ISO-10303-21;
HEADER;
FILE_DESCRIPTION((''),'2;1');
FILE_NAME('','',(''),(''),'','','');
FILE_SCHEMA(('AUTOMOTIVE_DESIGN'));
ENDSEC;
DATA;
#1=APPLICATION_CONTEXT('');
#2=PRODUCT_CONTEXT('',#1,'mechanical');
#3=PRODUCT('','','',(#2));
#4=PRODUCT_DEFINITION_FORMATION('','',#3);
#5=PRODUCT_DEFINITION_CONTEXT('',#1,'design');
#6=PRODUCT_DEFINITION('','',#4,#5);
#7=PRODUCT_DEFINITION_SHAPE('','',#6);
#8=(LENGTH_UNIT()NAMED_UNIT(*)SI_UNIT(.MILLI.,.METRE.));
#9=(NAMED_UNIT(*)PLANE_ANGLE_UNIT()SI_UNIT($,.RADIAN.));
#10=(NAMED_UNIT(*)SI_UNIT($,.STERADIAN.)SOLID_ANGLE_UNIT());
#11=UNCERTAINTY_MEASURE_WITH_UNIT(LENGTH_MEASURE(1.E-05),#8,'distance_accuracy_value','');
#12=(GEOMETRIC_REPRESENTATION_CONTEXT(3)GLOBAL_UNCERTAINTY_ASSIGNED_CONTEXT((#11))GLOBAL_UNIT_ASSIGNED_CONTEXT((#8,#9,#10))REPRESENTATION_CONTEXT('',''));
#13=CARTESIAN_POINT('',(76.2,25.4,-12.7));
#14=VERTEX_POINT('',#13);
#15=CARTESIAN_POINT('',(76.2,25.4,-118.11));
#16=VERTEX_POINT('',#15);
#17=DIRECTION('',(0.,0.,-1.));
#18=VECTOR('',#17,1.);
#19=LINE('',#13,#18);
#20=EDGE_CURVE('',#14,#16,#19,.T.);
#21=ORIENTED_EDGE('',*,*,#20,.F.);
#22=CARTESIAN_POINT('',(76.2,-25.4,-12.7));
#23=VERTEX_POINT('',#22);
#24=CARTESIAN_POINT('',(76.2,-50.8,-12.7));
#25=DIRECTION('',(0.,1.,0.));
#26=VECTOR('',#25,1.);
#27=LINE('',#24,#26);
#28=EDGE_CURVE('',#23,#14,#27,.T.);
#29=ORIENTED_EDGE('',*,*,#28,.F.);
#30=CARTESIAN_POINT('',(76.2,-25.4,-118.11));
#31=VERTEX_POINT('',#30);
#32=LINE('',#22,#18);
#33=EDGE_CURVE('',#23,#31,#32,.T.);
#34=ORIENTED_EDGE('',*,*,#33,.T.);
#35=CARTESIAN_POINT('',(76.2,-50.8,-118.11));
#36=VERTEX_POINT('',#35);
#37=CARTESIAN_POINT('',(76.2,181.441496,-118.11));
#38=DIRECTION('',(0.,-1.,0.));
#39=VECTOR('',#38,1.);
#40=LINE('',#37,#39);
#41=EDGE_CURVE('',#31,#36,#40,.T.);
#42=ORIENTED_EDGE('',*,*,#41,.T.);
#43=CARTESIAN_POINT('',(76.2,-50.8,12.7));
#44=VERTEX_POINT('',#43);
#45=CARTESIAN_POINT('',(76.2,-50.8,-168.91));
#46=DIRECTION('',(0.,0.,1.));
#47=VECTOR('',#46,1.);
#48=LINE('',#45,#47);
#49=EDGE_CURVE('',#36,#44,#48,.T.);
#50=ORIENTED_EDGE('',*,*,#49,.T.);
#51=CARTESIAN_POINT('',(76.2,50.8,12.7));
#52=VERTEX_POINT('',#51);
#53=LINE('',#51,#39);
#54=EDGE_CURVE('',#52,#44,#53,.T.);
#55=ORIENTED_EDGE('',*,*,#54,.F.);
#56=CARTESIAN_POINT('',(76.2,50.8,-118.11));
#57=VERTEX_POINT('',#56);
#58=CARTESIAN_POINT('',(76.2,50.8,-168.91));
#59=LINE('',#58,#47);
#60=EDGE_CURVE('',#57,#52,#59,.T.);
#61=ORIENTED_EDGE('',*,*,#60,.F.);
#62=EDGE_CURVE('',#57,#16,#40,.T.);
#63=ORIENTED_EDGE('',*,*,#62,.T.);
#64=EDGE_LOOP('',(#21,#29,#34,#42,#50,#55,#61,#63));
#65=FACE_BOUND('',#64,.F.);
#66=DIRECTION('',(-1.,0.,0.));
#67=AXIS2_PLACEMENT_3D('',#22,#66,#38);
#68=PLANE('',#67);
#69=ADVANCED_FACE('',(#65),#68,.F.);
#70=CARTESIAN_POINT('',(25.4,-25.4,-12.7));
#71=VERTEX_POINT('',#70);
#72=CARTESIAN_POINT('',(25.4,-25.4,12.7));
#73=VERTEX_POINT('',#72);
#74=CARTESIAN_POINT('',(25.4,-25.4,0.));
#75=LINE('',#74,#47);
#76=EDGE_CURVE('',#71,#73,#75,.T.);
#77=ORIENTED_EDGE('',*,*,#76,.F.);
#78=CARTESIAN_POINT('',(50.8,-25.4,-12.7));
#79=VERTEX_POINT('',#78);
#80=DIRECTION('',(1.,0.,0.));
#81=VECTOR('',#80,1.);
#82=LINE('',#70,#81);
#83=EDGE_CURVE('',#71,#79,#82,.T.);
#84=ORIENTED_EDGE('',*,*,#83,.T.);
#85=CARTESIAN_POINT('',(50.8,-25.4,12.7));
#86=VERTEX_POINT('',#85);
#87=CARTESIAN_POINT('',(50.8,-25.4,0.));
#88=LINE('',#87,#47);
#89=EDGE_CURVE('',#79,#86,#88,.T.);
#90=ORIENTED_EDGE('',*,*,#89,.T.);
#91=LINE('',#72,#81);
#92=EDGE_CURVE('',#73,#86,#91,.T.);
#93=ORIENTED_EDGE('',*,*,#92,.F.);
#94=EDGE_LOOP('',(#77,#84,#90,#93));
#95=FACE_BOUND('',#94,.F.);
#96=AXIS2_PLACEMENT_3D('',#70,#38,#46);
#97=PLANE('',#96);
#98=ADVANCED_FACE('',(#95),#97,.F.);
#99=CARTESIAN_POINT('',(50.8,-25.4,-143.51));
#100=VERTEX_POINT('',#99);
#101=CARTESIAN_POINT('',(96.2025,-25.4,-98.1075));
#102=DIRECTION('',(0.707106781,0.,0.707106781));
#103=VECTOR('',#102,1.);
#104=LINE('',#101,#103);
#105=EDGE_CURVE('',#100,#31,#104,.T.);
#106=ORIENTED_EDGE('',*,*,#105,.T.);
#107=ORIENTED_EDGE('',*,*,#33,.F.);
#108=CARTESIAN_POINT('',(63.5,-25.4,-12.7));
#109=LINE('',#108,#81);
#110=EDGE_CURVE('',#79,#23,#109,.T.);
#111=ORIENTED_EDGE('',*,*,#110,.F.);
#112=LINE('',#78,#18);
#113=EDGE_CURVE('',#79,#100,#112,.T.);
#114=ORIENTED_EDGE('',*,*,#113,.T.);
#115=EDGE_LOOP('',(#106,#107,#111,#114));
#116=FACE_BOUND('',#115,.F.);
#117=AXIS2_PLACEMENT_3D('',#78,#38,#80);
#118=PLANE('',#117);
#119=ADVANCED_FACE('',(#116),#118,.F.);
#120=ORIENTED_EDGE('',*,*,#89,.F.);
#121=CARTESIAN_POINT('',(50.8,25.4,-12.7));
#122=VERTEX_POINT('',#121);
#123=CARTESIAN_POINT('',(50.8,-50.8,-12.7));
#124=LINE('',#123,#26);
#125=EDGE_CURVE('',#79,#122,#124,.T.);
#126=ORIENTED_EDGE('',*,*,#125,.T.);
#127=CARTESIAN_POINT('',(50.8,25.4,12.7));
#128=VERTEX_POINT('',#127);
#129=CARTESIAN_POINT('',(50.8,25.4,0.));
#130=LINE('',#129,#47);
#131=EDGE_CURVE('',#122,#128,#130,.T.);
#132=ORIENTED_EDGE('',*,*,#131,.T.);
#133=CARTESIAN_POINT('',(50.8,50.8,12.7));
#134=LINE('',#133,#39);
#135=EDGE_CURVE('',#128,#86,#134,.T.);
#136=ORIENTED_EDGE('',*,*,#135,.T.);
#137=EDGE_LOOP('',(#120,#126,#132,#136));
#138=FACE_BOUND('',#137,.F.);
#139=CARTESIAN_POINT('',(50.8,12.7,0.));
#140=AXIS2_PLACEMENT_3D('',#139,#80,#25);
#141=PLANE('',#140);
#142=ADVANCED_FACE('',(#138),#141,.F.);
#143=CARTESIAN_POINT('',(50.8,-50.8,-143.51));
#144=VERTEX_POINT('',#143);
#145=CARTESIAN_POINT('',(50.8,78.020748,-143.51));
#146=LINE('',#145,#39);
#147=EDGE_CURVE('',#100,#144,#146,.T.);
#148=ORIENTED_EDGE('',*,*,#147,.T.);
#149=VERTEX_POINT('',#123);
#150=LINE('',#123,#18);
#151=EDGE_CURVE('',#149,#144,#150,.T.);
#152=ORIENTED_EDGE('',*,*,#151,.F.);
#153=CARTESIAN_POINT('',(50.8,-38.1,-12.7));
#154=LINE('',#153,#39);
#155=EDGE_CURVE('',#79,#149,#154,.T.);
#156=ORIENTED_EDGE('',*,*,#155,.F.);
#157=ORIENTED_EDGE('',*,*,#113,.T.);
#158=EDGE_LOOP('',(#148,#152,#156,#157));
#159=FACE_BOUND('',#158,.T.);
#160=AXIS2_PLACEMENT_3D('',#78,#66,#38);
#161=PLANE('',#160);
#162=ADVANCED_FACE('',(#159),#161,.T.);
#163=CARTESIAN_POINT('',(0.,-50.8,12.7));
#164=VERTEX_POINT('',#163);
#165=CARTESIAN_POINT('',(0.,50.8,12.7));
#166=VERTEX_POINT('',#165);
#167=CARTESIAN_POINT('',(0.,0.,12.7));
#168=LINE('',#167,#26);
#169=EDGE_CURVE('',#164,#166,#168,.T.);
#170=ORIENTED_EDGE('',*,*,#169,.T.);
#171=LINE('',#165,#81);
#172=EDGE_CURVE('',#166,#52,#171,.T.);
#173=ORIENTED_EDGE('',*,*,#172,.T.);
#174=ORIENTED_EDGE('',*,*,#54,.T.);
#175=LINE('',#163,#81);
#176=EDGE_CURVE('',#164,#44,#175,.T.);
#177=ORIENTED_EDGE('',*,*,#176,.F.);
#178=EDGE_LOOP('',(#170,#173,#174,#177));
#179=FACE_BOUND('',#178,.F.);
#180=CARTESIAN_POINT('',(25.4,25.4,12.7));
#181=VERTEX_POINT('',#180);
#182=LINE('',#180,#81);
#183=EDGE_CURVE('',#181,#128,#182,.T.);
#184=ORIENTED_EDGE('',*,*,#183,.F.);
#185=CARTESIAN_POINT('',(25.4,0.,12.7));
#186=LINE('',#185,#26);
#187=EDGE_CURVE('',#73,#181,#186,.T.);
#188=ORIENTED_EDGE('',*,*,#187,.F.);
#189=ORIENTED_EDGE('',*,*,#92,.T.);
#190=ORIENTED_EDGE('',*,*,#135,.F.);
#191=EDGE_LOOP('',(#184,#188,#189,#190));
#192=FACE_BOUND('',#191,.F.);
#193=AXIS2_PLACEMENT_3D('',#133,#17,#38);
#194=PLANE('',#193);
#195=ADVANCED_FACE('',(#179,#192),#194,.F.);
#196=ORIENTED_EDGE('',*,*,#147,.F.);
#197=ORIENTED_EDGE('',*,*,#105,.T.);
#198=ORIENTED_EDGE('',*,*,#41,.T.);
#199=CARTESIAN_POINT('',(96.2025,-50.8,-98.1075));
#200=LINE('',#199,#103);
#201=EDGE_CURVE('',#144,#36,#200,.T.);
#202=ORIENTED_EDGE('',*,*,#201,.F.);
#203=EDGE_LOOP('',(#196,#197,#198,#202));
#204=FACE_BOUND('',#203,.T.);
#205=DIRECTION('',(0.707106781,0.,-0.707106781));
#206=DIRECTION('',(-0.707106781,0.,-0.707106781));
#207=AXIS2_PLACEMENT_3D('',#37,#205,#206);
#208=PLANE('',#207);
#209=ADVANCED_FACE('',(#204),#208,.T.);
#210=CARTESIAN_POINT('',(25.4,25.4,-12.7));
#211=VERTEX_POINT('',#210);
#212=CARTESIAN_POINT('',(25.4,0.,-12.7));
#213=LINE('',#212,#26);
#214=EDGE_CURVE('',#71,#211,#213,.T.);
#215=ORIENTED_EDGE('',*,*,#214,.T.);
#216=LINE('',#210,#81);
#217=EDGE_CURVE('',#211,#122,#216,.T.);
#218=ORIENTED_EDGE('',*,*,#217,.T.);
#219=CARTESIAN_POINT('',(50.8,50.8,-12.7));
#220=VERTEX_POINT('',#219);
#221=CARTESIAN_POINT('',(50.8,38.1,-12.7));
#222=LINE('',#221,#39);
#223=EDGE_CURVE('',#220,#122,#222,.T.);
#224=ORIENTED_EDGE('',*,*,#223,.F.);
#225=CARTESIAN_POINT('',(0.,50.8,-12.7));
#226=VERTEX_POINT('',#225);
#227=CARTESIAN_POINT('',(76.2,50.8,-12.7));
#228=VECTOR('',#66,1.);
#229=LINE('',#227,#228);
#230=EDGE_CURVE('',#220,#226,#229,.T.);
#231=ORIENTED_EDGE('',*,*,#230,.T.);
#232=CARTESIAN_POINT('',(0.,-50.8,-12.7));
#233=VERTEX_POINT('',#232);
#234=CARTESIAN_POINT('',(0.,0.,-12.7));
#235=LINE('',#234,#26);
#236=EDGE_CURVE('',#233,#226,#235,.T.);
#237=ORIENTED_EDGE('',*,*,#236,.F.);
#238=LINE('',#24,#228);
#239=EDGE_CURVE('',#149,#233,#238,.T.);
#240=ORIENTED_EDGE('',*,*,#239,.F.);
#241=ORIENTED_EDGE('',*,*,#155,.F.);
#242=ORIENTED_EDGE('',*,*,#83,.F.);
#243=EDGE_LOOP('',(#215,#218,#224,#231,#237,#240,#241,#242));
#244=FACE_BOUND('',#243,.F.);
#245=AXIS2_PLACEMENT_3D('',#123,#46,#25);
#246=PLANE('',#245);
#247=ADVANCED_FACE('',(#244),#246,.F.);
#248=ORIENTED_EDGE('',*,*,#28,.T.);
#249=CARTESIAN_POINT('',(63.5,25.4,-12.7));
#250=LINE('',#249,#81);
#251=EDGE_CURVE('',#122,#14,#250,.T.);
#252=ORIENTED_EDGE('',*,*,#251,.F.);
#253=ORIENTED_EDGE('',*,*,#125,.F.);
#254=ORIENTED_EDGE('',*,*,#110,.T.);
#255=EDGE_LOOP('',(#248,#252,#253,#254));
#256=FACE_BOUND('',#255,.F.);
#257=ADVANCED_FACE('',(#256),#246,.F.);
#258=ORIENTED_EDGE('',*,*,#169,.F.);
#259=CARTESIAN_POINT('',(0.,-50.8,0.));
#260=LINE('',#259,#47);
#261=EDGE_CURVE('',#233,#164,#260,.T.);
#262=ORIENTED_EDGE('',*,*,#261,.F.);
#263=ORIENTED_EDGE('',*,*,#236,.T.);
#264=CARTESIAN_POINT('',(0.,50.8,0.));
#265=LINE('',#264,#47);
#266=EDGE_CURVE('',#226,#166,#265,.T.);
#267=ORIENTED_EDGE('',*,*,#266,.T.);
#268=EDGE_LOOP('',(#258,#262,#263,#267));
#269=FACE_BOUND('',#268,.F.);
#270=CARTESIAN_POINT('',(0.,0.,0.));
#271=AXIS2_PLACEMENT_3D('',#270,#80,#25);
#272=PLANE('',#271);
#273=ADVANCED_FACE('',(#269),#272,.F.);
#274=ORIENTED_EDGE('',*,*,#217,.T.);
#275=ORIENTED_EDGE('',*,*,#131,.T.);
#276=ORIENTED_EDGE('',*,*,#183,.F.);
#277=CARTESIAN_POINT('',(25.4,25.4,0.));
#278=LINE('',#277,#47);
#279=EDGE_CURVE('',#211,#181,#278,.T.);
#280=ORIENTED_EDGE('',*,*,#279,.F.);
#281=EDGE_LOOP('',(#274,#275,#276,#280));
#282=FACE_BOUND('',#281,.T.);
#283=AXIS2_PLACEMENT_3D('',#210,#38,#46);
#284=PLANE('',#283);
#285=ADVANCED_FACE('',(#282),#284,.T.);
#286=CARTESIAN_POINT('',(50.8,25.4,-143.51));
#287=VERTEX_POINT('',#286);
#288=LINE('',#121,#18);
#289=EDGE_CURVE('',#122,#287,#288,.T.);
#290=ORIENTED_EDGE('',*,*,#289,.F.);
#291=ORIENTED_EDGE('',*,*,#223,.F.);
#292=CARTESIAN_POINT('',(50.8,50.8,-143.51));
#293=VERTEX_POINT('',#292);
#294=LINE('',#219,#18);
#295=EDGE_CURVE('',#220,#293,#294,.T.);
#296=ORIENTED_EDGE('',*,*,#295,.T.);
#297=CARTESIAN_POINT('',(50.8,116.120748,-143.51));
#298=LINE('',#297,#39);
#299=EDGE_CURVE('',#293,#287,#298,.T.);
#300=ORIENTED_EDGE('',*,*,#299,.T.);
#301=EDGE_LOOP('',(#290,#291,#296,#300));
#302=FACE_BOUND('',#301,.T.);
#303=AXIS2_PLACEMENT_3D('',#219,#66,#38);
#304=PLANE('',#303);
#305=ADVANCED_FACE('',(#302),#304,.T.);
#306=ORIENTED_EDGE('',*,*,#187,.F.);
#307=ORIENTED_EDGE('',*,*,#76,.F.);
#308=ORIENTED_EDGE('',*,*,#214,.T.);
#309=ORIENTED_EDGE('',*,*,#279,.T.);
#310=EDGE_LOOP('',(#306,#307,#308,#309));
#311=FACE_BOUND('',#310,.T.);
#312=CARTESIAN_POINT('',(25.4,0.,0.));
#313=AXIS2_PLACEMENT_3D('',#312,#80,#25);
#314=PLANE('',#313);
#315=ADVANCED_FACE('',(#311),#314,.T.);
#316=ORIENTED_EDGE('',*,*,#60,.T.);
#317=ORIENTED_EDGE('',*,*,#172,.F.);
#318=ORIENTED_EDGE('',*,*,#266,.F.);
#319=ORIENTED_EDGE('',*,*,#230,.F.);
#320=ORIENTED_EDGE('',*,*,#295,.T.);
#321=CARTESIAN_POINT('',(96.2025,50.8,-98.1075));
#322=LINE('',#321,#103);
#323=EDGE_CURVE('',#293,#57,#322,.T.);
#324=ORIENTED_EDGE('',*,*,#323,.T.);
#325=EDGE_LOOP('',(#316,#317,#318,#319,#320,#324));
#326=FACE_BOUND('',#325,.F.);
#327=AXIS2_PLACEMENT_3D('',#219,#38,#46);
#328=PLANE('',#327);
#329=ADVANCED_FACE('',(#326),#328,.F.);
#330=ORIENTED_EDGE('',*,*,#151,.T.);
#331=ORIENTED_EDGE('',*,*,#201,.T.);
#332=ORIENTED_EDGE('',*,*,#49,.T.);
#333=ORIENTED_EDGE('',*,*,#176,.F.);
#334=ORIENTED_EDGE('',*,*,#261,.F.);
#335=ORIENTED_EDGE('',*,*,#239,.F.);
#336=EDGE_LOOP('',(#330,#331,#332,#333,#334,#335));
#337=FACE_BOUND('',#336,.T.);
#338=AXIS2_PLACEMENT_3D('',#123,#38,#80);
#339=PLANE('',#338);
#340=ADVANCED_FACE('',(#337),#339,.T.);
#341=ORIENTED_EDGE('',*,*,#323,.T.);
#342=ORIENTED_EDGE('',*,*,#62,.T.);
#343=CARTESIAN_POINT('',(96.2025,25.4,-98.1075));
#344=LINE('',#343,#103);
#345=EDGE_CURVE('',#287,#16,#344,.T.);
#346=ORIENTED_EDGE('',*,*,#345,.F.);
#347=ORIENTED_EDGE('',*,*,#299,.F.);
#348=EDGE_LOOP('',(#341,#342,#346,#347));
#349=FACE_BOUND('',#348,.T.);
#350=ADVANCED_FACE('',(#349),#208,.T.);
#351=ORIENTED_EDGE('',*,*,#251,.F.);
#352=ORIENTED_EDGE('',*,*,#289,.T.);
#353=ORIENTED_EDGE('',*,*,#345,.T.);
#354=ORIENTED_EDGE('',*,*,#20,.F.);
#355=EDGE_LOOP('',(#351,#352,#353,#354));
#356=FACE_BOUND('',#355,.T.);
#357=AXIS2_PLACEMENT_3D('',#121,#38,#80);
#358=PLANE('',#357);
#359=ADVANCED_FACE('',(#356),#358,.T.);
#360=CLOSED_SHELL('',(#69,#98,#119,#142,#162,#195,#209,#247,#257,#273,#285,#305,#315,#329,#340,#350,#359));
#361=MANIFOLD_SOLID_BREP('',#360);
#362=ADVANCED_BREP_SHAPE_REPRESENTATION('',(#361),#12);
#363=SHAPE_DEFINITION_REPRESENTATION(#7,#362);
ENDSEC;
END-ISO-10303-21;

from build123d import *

# Parameters (mm, degrees)
F0_W        = 101.6
F0_H        = 25.4
F1_DEPTH    = 25.4
F2_W        = 25.4
F2_H        = 25.4
F3_DEPTH    = 25.4
F4_W        = 76.2
F4_H        = 25.4
F4_W_2      = 25.4
F5_DEPTH    = 25.4
F6_W        = 25.4
F6_H        = 25.4
F7_DEPTH    = 156.21
F8_T1_DEPTH = 286.6829915773
F8_T3_DEPTH = 286.6829915773


# Not quite as in the source:
# - a fillet or chamfer that OpenCascade refuses, or shapes differently, is made with other operations: its cross-section is extruded or revolved along the edge and cut away or added


with BuildPart() as f1:
    # F0 (on Right) → F1 (new body)
    with BuildSketch(Plane.YZ):
        Rectangle(F0_W, F0_H)
    extrude(amount=F1_DEPTH)

    # F2 (on face) → F3 (join)
    with BuildSketch(Plane.YZ.offset(25.4)):
        with Locations((38.1, 0)):
            Rectangle(F2_W, F2_H)
        with Locations((-38.1, 0)):
            Rectangle(F2_W, F2_H)
    extrude(amount=F3_DEPTH)

    # F4 (on face) → F5 (join)
    with BuildSketch(Plane.YZ.offset(50.8)):
        with Locations((12.7, 0)):
            Rectangle(F4_W, F4_H)
        with Locations((-38.1, 0)):
            Rectangle(F4_W_2, F4_H)
    extrude(amount=F5_DEPTH)

    # F6 (on face) → F7 (join)
    with BuildSketch(Plane(origin=(0, 0, -12.7), x_dir=(1, 0, 0), z_dir=(0, 0, -1))):
        with Locations((63.5, 38.1)):
            Rectangle(F6_W, F6_H)
        with Locations((63.5, -38.1)):
            Rectangle(F6_W, F6_H)
    extrude(amount=F7_DEPTH)

    # F8: chamfer of 50.8 on 2 edges, made by hand

    # F8_s2 → F8_t1 (cut)
    with BuildSketch(Plane.XZ.offset(-181.4414957887)):
        Polygon((76.2, -118.11), (25.4, -168.91), (76.2, -168.91), align=None)
    extrude(amount=F8_T1_DEPTH, mode=Mode.SUBTRACT)

    # F8_s4 → F8_t3 (cut)
    with BuildSketch(Plane.XZ.offset(-105.2414957887)):
        Polygon((25.4, -168.91), (76.2, -118.11), (76.2, -168.91), align=None)
    extrude(amount=F8_T3_DEPTH, mode=Mode.SUBTRACT)


solid = f1.part
